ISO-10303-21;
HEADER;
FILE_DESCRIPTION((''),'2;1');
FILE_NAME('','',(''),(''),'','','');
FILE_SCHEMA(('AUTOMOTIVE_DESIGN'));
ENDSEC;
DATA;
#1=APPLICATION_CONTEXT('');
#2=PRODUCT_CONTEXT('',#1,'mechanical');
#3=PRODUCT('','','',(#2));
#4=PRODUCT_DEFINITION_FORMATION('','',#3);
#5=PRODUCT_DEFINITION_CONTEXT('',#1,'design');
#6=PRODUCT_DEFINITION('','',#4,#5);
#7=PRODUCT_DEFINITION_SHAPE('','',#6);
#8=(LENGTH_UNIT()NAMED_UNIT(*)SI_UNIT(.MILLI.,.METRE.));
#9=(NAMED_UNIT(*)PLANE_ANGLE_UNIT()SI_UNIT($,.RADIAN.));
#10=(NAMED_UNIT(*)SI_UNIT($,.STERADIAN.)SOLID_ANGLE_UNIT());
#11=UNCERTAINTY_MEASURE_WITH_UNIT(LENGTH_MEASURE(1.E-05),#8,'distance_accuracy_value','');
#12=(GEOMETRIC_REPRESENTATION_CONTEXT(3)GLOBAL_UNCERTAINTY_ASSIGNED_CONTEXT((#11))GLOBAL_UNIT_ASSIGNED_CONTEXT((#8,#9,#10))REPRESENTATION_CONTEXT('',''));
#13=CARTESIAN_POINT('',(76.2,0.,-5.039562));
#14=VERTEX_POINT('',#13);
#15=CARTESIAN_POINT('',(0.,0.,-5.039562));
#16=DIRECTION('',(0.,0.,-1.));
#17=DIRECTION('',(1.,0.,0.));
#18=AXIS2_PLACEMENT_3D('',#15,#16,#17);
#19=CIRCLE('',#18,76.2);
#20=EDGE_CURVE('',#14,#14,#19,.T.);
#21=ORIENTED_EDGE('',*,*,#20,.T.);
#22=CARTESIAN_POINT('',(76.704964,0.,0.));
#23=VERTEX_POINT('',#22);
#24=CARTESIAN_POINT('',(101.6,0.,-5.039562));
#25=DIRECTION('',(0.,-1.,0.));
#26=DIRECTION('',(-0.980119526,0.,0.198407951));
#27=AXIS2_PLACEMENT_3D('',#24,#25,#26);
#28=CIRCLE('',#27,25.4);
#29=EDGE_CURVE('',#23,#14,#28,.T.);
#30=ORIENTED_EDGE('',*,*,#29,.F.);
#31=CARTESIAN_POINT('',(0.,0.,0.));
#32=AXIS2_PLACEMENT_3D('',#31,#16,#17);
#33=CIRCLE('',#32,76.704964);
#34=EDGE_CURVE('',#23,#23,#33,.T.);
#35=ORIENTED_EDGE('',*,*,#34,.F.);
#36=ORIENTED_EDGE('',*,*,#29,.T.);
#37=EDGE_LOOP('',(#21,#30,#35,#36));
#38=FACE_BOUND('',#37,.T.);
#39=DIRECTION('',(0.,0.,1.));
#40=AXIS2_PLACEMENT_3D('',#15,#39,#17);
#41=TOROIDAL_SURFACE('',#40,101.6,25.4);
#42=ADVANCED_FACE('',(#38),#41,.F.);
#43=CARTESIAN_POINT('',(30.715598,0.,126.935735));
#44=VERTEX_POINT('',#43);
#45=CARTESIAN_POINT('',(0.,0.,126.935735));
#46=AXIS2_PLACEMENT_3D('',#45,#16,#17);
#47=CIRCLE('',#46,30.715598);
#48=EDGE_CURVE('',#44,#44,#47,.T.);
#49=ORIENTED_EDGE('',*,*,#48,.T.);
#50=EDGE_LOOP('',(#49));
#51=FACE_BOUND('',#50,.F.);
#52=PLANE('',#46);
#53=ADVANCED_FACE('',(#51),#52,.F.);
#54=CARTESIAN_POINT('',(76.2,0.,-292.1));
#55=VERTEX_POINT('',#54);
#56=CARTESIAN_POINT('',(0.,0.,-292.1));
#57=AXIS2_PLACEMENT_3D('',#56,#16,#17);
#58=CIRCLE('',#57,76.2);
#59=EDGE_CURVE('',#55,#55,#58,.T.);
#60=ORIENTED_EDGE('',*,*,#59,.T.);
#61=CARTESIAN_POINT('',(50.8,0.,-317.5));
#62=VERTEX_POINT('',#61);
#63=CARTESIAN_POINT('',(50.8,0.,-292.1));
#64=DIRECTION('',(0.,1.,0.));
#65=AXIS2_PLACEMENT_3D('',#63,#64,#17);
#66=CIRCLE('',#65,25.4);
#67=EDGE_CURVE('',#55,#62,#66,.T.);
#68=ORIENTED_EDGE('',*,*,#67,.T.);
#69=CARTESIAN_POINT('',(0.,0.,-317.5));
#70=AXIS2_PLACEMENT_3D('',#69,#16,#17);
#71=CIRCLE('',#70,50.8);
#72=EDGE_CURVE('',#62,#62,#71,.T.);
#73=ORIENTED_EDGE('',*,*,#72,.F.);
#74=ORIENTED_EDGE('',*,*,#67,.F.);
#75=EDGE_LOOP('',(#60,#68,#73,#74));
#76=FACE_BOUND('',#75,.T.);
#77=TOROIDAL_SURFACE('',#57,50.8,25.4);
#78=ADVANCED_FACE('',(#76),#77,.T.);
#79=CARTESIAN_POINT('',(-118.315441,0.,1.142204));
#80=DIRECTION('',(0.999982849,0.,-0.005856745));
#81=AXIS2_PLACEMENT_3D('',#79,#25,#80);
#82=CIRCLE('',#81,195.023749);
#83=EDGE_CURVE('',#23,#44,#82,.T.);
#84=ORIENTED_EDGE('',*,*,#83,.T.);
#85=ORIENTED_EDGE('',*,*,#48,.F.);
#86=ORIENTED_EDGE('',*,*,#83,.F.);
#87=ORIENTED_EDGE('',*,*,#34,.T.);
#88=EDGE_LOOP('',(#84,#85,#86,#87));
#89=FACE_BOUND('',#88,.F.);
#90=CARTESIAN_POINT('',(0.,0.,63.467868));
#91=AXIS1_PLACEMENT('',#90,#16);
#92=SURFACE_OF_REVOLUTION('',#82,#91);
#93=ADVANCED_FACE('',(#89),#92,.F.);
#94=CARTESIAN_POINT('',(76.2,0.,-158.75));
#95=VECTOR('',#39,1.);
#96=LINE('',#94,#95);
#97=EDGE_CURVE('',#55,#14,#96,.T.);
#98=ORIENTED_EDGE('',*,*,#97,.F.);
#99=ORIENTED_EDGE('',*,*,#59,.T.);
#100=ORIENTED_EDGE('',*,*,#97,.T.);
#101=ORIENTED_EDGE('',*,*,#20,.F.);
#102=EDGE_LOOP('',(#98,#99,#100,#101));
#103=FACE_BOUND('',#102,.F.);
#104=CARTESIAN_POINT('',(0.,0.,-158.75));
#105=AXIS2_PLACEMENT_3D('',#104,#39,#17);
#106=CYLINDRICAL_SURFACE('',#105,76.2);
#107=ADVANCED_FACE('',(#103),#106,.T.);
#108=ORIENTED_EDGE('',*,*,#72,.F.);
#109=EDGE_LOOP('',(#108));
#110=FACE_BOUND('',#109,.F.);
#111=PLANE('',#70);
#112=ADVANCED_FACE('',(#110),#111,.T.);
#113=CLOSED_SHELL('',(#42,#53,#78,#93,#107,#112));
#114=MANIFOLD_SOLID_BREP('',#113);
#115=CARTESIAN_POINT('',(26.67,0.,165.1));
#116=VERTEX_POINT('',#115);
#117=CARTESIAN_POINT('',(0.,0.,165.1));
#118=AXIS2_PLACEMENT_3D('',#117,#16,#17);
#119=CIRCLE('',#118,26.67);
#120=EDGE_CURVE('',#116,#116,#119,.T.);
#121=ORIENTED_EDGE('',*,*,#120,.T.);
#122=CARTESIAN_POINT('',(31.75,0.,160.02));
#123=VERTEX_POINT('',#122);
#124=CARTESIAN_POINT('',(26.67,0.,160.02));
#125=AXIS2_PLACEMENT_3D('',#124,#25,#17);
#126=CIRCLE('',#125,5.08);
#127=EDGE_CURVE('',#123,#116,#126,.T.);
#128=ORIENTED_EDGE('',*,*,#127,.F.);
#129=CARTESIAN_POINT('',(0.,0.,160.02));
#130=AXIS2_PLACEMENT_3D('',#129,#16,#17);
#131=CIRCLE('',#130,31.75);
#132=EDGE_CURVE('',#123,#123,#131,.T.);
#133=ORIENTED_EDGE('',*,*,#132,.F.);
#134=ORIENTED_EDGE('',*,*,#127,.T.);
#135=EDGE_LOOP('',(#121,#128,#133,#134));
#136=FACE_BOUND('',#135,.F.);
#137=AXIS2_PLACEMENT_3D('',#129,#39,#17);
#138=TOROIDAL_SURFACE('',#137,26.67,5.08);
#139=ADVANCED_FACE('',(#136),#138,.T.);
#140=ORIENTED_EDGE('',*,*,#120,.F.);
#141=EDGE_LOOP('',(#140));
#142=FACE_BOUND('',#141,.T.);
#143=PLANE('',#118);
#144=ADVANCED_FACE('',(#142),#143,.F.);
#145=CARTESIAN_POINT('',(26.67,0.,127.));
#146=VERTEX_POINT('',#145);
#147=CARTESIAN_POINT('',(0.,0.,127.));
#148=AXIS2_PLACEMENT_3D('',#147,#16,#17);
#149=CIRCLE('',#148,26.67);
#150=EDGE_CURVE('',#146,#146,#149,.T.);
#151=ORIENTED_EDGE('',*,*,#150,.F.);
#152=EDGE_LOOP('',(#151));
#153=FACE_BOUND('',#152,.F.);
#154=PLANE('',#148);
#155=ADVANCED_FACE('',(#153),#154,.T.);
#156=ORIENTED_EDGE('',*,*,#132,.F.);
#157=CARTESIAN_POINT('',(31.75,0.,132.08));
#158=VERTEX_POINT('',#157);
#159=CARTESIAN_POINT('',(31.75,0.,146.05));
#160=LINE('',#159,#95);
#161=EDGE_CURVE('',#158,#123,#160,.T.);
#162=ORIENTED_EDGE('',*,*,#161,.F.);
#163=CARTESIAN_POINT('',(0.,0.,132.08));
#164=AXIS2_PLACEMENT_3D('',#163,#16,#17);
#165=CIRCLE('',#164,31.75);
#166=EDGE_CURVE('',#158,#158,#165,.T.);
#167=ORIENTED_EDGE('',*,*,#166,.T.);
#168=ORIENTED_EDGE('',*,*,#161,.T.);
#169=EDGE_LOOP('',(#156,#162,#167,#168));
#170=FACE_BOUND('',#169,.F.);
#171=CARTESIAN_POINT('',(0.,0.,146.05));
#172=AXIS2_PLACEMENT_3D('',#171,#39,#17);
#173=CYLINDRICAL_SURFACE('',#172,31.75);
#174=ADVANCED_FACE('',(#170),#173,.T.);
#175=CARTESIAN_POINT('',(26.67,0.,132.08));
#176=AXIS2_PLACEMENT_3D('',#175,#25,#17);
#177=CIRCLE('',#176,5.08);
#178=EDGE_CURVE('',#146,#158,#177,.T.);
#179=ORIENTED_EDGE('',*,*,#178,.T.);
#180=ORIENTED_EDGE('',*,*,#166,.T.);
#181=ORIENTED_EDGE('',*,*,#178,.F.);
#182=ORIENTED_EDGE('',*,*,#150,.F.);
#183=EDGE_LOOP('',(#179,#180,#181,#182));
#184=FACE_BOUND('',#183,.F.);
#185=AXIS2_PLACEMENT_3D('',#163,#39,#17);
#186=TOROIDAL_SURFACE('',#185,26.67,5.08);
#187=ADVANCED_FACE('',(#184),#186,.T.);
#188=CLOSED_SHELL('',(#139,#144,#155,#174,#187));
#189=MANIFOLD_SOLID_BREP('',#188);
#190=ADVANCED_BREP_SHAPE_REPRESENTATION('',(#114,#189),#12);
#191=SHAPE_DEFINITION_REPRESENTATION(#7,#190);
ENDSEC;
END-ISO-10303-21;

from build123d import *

# Parameters (mm, degrees)
F0_W = 76.2
F0_H = 317.5
F2_W = 31.75
F2_H = 38.1
F7_R = 5.08


# Not quite as in the source:
# - a fillet or chamfer that OpenCascade refuses, or shapes differently, is made with other operations: its cross-section is extruded or revolved along the edge and cut away or added


with BuildPart() as f1:
    # F0 (on Front) → F1 (revolve)
    with BuildSketch(Plane.XZ):
        with Locations((38.1, -158.75)):
            Rectangle(F0_W, F0_H)
    revolve(axis=Axis((0, 0, -158.75), (0, 0, -1)))

    # F4 (on Front) → F5 (revolve)
    with BuildSketch(Plane.XZ):
        with BuildLine():
            Line((30.7155977935, 126.9357353449), (0, 126.9357353449))
            Line((0, 126.9357353449), (0, 0))
            Line((0, 0), (76.7049640417, 0))
            ThreePointArc((76.7049640417, 0), (65.0449125042, 67.5744537485), (30.7155977935, 126.9357353449))
        make_face()
    revolve(axis=Axis((0, 0, 63.4678676724), (0, 0, -1)))

    # F6: fillet of radius 25.4 on 3 edges, made by hand

    # F6_s1 → F6_t2 (revolve)
    with BuildSketch(Plane.XZ):
        with BuildLine():
            ThreePointArc((76.7049640417, 0), (76.3265562958, -2.5071632184), (76.2, -5.0395619488))
            Line((76.2, -5.0395619488), (76.2, 0))
            Line((76.2, 0), (76.7049640417, 0))
        make_face()
    revolve(axis=Axis((0, 0, 0), (0, 0, -1)))

    # F6_s3 → F6_t4 (revolve, cut)
    with BuildSketch(Plane.XZ):
        with BuildLine():
            ThreePointArc((76.2, -292.1), (68.7605122421, -310.0605122421), (50.8, -317.5))
            Line((50.8, -317.5), (76.2, -317.5))
            Line((76.2, -317.5), (76.2, -292.1))
        make_face()
    revolve(axis=Axis((0, 0, -317.5), (0, 0, -1)), mode=Mode.SUBTRACT)


with BuildPart() as f3:
    # F2 (on Front) → F3 (revolve)
    with BuildSketch(Plane.XZ):
        with Locations((15.875, 146.05)):
            Rectangle(F2_W, F2_H)
    revolve(axis=Axis((0, 0, 146.05), (0, 0, -1)))

    # F7
    f7_edges = [f3.edges().sort_by_distance(p)[0] for p in [
        (-31.75, 0, 165.1),
        (-31.75, 0, 127),
        (31.75, 0, 146.05),
    ]]
    fillet(f7_edges, radius=F7_R)


solid = Compound([f1.part, f3.part])
